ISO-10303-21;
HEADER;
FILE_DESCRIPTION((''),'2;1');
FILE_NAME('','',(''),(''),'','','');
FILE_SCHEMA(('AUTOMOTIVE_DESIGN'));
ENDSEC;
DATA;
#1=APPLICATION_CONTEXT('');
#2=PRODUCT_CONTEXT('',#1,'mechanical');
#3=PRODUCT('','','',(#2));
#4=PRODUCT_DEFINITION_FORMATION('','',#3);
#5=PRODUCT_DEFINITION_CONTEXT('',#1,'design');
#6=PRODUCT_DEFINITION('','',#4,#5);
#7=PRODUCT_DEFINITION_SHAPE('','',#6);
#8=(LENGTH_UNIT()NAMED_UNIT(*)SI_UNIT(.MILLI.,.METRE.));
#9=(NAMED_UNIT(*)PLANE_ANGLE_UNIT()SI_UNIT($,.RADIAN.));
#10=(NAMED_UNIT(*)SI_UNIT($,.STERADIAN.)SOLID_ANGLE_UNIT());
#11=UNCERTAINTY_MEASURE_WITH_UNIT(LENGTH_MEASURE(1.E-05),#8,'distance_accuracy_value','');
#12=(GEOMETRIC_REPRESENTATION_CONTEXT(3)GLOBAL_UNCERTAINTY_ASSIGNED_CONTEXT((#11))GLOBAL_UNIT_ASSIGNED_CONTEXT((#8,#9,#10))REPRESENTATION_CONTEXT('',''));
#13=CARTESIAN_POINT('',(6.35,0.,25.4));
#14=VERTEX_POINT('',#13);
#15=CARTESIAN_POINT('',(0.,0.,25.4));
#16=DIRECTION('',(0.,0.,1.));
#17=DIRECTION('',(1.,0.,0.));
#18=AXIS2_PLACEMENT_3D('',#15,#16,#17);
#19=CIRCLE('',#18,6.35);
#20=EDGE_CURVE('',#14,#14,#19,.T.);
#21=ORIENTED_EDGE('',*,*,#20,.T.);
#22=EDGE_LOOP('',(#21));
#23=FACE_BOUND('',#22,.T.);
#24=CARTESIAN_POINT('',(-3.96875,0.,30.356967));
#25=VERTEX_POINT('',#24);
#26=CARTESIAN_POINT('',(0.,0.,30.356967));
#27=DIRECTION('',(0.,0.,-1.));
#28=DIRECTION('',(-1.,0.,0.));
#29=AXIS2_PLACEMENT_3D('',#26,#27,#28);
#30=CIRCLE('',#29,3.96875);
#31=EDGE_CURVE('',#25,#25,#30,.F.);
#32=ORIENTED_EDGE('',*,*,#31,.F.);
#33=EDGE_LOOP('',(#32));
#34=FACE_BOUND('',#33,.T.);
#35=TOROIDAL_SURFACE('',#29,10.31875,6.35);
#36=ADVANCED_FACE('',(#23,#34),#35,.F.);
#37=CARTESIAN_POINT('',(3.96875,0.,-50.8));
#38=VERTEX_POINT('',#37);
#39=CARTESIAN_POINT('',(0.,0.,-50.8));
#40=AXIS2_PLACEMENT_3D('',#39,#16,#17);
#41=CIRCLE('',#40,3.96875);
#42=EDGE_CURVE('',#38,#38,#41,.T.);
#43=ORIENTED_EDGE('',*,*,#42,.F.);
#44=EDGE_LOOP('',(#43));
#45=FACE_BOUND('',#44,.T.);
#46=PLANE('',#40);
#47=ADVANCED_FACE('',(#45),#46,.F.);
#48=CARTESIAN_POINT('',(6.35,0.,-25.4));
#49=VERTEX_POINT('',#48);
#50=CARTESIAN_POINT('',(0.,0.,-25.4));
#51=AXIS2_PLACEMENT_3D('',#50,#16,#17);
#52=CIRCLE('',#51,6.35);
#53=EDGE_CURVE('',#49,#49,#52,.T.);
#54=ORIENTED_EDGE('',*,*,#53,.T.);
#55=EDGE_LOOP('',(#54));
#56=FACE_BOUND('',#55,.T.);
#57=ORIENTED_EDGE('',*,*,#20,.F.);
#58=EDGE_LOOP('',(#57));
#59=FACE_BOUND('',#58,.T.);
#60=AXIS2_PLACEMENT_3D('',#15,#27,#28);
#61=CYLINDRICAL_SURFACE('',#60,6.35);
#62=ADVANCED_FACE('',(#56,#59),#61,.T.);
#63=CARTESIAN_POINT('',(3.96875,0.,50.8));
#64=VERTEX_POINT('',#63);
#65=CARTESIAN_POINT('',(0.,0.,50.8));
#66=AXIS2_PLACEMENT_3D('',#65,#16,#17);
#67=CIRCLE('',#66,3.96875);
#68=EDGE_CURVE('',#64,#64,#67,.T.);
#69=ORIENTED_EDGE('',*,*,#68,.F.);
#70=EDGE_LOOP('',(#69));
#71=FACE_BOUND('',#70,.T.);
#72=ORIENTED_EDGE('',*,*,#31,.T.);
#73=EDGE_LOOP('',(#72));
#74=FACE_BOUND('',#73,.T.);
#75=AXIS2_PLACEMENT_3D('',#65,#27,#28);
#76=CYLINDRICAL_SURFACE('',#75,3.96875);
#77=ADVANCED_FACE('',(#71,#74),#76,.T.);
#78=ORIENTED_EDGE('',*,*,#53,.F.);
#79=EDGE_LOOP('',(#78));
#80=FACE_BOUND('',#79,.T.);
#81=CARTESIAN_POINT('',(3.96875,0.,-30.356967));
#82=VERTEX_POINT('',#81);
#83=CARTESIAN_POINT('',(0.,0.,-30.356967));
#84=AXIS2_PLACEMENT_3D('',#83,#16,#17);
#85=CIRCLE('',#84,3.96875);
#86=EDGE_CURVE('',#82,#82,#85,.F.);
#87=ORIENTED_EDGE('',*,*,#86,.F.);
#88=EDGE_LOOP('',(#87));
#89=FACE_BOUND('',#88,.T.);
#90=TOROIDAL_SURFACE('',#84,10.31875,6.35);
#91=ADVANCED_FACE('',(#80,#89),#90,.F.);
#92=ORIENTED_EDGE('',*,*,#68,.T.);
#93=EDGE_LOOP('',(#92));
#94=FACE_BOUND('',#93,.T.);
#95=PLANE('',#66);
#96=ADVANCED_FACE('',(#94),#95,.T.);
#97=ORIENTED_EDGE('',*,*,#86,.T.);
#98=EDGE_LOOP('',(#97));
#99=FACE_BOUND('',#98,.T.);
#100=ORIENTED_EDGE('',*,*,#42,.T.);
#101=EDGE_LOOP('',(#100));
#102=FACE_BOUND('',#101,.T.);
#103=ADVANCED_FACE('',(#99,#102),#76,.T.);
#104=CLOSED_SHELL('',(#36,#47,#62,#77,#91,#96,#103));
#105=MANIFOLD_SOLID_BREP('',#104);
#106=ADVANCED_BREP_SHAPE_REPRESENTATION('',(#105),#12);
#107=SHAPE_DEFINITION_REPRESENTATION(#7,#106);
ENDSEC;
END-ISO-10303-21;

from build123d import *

# Parameters (mm, degrees)
SKETCH1_R           = 6.35
BOSS_EXTRUDE1_DEPTH = 25.4
SKETCH2_R           = 3.96875
BOSS_EXTRUDE2_DEPTH = 50.8
FILLET1_R           = 6.35


with BuildPart() as part:
    # Sketch1 → Boss-Extrude1 (new, symmetric)
    with BuildSketch(Plane.XY):
        Circle(SKETCH1_R)
    extrude(amount=BOSS_EXTRUDE1_DEPTH, both=True)

    # Sketch2 → Boss-Extrude2 (add, symmetric)
    with BuildSketch(Plane.XY):
        Circle(SKETCH2_R)
    extrude(amount=BOSS_EXTRUDE2_DEPTH, both=True)

    # Fillet1
    # the kernel refuses this fillet: 6.35 mm, written as the material it adds along each edge
    with BuildSketch(Plane(origin=(0, 0, -25.4), x_dir=(1, 0, 0), z_dir=(0, -1, 0))) as fillet1_piece_1:
        with BuildLine():
            CenterArc((10.31875, -4.956967161), FILLET1_R, 128.682187453, 51.317812547)
            Line((3.96875, -4.956967161), (3.84175, -4.956967161))
            Line((3.84175, -4.956967161), (3.84175, 0))
            Line((3.84175, 0), (3.96875, 0.127))
            ThreePointArc((3.96875, 0.127), (5.159375, 0.127), (6.270625, 0.099139343))
            Line((6.270625, 0.099139343), (6.35, 0))
        make_face()
    revolve(axis=Axis((0, 0, -25.4), (0, 0, 1)))
    with BuildSketch(Plane(origin=(0, 0, 25.4), x_dir=(1, 0, 0), z_dir=(0, -1, 0))) as fillet1_piece_2:
        with BuildLine():
            CenterArc((10.31875, 4.956967161), FILLET1_R, 180, 51.317812547)
            Line((3.96875, 4.956967161), (3.84175, 4.956967161))
            Line((3.84175, 4.956967161), (3.84175, 0))
            Line((3.84175, 0), (3.96875, -0.127))
            ThreePointArc((3.96875, -0.127), (5.159375, -0.127), (6.270625, -0.099139343))
            Line((6.270625, -0.099139343), (6.35, 0))
        make_face()
    revolve(axis=Axis((0, 0, 25.4), (0, 0, 1)))


solid = part.part
